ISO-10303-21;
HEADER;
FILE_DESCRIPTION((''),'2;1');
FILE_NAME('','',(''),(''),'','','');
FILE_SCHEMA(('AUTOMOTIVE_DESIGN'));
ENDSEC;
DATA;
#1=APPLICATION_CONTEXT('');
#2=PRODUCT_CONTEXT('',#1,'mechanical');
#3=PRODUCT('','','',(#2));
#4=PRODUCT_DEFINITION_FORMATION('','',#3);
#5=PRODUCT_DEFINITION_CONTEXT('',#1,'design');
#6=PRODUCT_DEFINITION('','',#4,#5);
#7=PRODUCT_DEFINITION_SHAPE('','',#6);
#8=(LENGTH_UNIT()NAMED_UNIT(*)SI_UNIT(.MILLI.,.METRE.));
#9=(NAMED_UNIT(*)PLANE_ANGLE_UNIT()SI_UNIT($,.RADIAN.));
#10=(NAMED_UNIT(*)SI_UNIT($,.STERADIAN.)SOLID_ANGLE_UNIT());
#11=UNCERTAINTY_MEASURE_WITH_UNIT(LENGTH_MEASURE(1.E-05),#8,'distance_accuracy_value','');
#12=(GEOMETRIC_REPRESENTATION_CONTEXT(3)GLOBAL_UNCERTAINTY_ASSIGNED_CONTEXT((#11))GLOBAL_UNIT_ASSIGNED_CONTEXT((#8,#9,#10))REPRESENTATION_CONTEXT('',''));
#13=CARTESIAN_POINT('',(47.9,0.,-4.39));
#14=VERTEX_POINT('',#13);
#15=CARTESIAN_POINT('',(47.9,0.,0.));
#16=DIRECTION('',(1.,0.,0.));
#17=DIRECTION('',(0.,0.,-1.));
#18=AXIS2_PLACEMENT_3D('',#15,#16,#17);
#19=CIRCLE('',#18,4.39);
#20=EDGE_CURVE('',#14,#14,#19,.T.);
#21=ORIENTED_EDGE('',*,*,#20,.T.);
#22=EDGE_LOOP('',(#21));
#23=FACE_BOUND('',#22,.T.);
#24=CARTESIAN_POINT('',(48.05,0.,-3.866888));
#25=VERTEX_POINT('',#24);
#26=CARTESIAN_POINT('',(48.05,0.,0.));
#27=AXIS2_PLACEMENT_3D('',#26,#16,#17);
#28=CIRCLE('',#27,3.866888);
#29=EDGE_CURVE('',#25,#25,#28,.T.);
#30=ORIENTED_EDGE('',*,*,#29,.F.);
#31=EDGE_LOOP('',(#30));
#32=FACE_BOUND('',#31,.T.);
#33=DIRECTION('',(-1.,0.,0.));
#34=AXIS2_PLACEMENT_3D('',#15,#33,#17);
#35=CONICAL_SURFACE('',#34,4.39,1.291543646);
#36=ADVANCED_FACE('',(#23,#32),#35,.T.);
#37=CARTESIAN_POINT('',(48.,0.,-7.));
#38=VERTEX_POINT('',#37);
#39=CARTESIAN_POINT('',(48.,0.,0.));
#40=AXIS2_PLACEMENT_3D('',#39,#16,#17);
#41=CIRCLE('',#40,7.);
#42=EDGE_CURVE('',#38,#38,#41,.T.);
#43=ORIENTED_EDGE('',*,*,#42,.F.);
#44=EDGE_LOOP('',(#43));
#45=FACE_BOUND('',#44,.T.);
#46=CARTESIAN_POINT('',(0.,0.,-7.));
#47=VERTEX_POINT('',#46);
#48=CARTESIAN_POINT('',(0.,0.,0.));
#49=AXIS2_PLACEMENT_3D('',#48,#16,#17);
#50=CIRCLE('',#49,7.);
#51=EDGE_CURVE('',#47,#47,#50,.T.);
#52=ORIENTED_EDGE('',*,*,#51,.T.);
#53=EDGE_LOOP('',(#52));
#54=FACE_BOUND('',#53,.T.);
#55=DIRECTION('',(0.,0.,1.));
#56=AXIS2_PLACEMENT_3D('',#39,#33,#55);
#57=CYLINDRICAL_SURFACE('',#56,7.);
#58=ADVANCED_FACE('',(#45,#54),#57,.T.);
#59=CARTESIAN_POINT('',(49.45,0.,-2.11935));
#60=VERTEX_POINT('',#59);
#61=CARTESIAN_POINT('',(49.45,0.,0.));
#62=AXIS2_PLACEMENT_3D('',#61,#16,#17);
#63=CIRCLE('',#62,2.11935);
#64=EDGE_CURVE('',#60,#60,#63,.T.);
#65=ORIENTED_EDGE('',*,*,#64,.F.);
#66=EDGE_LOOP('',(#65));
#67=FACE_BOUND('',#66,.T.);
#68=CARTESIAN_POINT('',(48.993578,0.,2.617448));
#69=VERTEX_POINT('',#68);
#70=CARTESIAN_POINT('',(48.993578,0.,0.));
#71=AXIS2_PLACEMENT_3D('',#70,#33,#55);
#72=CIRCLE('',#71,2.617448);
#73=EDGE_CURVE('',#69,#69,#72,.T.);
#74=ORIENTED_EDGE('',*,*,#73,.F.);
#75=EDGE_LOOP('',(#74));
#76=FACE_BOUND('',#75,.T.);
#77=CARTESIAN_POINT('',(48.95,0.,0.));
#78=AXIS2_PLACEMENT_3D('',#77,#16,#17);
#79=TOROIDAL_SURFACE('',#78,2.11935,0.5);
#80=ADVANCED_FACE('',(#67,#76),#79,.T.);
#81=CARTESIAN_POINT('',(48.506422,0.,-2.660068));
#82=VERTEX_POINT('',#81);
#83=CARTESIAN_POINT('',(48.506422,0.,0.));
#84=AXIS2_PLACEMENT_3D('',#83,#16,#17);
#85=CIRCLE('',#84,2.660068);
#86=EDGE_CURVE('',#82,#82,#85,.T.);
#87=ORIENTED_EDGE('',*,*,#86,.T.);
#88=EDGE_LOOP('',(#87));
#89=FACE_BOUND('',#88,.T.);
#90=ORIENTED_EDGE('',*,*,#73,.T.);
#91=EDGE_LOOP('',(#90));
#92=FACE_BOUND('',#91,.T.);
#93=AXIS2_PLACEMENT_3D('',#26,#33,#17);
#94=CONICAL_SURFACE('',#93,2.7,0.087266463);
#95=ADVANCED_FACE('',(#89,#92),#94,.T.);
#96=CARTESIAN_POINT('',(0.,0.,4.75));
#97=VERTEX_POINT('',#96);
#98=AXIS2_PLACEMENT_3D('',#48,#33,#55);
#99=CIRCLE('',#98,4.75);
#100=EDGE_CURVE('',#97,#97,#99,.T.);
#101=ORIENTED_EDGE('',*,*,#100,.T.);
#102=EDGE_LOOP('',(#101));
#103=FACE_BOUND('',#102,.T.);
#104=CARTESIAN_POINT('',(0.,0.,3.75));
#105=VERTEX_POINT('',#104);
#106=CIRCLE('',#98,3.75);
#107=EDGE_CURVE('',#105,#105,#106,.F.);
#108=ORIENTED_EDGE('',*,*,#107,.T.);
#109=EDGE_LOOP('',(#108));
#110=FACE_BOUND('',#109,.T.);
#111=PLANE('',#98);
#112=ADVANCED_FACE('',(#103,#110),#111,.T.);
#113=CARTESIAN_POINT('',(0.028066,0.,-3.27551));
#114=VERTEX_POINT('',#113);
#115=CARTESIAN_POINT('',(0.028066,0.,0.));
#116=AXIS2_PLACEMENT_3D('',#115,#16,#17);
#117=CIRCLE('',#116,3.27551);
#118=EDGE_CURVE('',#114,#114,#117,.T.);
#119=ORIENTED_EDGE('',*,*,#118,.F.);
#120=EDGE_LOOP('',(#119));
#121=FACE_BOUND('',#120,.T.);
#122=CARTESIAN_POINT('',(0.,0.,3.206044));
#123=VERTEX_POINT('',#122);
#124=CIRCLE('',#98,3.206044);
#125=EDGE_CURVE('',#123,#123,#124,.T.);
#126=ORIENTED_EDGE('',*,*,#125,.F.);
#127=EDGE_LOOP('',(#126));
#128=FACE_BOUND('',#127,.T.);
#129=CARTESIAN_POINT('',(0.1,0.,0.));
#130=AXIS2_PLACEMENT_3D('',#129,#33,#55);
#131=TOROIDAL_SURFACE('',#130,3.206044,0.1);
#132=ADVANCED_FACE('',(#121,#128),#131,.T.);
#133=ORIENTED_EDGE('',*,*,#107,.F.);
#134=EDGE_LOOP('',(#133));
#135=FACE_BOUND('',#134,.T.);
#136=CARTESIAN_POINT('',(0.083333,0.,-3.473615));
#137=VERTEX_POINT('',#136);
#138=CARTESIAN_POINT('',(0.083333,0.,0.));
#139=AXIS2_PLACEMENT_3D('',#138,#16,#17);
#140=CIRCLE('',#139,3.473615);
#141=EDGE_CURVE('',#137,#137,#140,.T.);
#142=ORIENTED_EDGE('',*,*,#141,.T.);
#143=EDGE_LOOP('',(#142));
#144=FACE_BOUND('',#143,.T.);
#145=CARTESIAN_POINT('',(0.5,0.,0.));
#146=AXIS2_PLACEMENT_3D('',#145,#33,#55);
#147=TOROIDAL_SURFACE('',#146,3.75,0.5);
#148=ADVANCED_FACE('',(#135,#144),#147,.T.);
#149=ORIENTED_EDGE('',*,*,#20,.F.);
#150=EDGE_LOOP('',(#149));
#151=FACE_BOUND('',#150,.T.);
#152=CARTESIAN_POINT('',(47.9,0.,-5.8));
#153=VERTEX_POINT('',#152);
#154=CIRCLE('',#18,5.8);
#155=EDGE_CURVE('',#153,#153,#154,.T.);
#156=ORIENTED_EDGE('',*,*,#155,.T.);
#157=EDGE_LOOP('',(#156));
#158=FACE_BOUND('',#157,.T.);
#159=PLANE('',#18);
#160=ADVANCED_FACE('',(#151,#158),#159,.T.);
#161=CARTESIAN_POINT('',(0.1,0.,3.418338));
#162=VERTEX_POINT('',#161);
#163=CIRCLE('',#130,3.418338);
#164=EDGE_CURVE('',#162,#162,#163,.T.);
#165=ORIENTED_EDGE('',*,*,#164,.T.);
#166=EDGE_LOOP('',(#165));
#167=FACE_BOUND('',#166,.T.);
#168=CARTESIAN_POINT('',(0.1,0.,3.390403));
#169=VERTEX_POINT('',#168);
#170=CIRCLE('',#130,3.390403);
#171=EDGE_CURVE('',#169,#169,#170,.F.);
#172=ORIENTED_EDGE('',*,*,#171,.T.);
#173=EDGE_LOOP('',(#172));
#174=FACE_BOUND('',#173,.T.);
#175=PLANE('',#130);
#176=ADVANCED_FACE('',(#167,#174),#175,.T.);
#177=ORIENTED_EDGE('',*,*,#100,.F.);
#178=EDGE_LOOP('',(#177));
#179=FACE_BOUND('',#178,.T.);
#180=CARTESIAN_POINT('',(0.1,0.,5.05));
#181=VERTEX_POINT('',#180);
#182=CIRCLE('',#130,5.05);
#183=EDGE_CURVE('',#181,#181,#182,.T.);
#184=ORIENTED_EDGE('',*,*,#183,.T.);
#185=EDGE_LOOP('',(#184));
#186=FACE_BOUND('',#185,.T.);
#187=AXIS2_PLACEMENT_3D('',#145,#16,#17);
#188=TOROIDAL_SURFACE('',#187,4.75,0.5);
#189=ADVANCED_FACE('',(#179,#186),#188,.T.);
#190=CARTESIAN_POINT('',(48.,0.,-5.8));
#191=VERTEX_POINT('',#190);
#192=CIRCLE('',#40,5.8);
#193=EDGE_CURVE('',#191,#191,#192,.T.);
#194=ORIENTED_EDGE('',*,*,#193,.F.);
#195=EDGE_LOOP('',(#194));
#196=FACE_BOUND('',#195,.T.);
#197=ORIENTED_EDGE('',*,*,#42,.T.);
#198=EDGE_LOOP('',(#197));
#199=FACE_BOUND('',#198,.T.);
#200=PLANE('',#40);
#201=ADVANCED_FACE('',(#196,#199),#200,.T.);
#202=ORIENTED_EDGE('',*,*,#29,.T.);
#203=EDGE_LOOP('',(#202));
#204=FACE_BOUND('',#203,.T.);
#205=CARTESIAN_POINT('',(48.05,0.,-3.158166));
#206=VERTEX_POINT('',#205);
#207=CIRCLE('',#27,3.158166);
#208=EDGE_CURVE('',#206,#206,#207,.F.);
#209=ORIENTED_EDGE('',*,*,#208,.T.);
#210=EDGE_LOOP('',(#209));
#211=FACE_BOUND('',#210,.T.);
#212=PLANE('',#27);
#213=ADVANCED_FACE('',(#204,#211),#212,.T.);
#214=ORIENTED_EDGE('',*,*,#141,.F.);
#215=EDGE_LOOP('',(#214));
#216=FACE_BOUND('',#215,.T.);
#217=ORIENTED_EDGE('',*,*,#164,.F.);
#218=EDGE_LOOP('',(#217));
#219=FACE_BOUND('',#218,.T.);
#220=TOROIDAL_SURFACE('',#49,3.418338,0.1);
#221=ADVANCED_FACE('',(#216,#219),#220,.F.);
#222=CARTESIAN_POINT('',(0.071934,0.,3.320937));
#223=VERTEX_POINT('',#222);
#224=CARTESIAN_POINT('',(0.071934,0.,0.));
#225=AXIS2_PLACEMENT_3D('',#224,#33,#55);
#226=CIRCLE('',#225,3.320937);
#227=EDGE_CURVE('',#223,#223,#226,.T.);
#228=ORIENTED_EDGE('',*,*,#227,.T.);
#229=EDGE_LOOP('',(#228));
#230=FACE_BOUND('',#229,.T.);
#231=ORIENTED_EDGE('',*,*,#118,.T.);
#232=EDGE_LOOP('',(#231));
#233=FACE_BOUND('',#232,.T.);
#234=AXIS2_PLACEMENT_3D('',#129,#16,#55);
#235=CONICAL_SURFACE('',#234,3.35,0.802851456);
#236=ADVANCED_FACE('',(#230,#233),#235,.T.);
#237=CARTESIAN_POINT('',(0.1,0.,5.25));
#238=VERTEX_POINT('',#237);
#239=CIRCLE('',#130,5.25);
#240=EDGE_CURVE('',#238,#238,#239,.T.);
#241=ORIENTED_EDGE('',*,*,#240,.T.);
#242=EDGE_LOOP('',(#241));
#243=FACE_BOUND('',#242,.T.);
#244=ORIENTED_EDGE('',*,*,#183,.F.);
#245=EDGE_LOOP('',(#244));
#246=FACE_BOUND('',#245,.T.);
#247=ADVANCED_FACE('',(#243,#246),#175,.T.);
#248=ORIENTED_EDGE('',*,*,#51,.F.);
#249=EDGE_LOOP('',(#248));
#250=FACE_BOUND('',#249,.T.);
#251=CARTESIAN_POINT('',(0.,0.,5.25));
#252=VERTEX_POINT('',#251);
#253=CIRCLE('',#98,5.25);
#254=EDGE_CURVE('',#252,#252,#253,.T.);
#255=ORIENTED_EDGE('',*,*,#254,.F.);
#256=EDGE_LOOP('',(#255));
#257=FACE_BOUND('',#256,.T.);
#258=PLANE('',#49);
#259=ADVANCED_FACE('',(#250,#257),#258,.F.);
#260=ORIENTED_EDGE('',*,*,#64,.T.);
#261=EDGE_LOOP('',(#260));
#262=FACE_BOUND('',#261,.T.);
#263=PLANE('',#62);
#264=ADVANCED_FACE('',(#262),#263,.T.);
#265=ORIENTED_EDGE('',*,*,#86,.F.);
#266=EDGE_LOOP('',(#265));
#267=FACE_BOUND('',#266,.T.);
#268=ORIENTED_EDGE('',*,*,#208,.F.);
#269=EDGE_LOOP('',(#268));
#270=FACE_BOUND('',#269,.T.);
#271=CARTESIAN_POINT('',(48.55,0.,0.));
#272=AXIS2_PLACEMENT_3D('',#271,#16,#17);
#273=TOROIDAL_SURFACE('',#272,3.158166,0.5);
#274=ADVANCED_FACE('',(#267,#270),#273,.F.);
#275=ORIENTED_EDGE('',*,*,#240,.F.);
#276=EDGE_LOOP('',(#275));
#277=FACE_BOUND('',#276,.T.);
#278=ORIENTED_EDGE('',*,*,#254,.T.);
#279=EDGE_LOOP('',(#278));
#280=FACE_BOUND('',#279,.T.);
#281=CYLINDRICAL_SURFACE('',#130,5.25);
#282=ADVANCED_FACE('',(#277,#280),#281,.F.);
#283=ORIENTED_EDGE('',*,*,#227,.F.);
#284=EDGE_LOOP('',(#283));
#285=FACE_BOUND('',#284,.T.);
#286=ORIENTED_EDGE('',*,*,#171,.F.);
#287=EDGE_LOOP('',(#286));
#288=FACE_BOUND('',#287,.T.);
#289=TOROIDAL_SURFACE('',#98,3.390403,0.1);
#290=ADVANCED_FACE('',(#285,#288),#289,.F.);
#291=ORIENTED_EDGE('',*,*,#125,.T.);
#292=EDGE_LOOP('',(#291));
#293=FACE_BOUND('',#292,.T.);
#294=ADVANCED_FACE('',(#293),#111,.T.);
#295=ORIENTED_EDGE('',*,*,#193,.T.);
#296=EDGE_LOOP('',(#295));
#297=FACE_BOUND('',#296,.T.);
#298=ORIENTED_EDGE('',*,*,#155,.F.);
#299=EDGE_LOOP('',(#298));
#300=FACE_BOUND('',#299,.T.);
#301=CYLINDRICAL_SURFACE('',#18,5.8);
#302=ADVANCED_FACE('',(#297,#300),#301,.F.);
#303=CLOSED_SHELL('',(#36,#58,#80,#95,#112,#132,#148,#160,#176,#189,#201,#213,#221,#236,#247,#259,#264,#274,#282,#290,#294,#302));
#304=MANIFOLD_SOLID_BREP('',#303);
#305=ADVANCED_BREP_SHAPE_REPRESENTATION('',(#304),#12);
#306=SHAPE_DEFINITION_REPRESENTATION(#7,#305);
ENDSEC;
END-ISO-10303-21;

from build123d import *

# Parameters (mm, degrees)
SKETCH1_R           = 7
BOSS_EXTRUDE1_DEPTH = 48
SKETCH2_R           = 5.8
CUT_EXTRUDE1_DEPTH  = 0.1
SKETCH3_R           = 5.25
CUT_EXTRUDE2_DEPTH  = 0.1
SKETCH4_R           = 5.05
SKETCH4_R_2         = 3.45
BOSS_EXTRUDE2_DEPTH = 0.1
FILLET1_R           = 0.5
SKETCH5_R           = 3.35
BOSS_EXTRUDE3_DEPTH = 0.1
BOSS_EXTRUDE3_TAPER = 46
FILLET4_R           = 0.1
SKETCH6_R           = 4.39
BOSS_EXTRUDE4_DEPTH = 0.15
BOSS_EXTRUDE4_TAPER = 74
SKETCH7_R           = 2.7
BOSS_EXTRUDE5_DEPTH = 1.4
BOSS_EXTRUDE5_TAPER = 5
FILLET5_R           = 0.5
FILLET6_R           = 0.5


with BuildPart() as part:
    # Sketch1 → Boss-Extrude1 (new body)
    with BuildSketch(Plane(origin=(0, 0, 0), x_dir=(0, 0, -1), z_dir=(1, 0, 0))):
        Circle(SKETCH1_R)
    extrude(amount=BOSS_EXTRUDE1_DEPTH)

    # Sketch2 → Cut-Extrude1 (cut)
    with BuildSketch(Plane(origin=(48, 0, 0), x_dir=(0, 0, -1), z_dir=(1, 0, 0))):
        Circle(SKETCH2_R)
    extrude(amount=-CUT_EXTRUDE1_DEPTH, mode=Mode.SUBTRACT)

    # Sketch3 → Cut-Extrude2 (cut)
    with BuildSketch(Plane.ZY):
        Circle(SKETCH3_R)
    extrude(amount=-CUT_EXTRUDE2_DEPTH, mode=Mode.SUBTRACT)

    # Sketch4 → Boss-Extrude2 (add)
    with BuildSketch(Plane.ZY.offset(-0.1)):
        Circle(SKETCH4_R)
        Circle(SKETCH4_R_2, mode=Mode.SUBTRACT)
    extrude(amount=BOSS_EXTRUDE2_DEPTH)

    # Fillet1
    # the kernel refuses this fillet: 0.5 mm, written as the material it takes off along each edge
    with BuildSketch(Plane(origin=(0, 0, 0), x_dir=(0, 0, 1), z_dir=(0, -1, 0))) as fillet1_piece_1:
        with BuildLine():
            CenterArc((4.75, -0.5), FILLET1_R, 53.130102354, 36.869897646)
            Line((4.75, 0), (4.75, 0.01))
            Line((4.75, 0.01), (5.05, 0.01))
            Line((5.05, 0.01), (5.06, 0))
            ThreePointArc((5.06, 0), (5.06, -0.05), (5.056, -0.092))
            Line((5.056, -0.092), (5.05, -0.1))
        make_face()
    revolve(axis=Axis((0, 0, 0), (-1, 0, 0)), mode=Mode.SUBTRACT)
    with BuildSketch(Plane(origin=(0, 0, 0), x_dir=(0, 0, 1), z_dir=(0, -1, 0))) as fillet1_piece_2:
        with BuildLine():
            CenterArc((3.75, -0.5), FILLET1_R, 90, 36.869897646)
            Line((3.45, -0.1), (3.444, -0.092))
            ThreePointArc((3.444, -0.092), (3.44, -0.05), (3.44, 0))
            Line((3.44, 0), (3.45, 0.01))
            Line((3.45, 0.01), (3.75, 0.01))
            Line((3.75, 0.01), (3.75, 0))
        make_face()
    revolve(axis=Axis((0, 0, 0), (-1, 0, 0)), mode=Mode.SUBTRACT)

    # Sketch5 → Boss-Extrude3 (add)
    with BuildSketch(Plane.ZY.offset(-0.1)):
        Circle(SKETCH5_R)
    extrude(amount=BOSS_EXTRUDE3_DEPTH, taper=BOSS_EXTRUDE3_TAPER)

    # Fillet4
    fillet4_edges = [part.edges().sort_by_distance(p)[0] for p in [
        (0.1, 0, -3.45),
        (0.1, 0, -3.35),
        (0, 0, -3.246446969),
    ]]
    fillet(fillet4_edges, radius=FILLET4_R)

    # Sketch6 → Boss-Extrude4 (add)
    with BuildSketch(Plane(origin=(47.9, 0, 0), x_dir=(0, 0, -1), z_dir=(1, 0, 0))):
        Circle(SKETCH6_R)
    extrude(amount=BOSS_EXTRUDE4_DEPTH, taper=BOSS_EXTRUDE4_TAPER)

    # Sketch7 → Boss-Extrude5 (add)
    with BuildSketch(Plane(origin=(48.05, 0, 0), x_dir=(0, 0, -1), z_dir=(1, 0, 0))):
        Circle(SKETCH7_R)
    extrude(amount=BOSS_EXTRUDE5_DEPTH, taper=BOSS_EXTRUDE5_TAPER)

    # Fillet5
    fillet5_edges = [part.edges().sort_by_distance(p)[0] for p in [
        (48.05, 0, 2.7),
    ]]
    fillet(fillet5_edges, radius=FILLET5_R)

    # Fillet6
    fillet6_edges = [part.edges().sort_by_distance(p)[0] for p in [
        (49.45, 0, 2.577515871),
    ]]
    fillet(fillet6_edges, radius=FILLET6_R)


solid = part.part
